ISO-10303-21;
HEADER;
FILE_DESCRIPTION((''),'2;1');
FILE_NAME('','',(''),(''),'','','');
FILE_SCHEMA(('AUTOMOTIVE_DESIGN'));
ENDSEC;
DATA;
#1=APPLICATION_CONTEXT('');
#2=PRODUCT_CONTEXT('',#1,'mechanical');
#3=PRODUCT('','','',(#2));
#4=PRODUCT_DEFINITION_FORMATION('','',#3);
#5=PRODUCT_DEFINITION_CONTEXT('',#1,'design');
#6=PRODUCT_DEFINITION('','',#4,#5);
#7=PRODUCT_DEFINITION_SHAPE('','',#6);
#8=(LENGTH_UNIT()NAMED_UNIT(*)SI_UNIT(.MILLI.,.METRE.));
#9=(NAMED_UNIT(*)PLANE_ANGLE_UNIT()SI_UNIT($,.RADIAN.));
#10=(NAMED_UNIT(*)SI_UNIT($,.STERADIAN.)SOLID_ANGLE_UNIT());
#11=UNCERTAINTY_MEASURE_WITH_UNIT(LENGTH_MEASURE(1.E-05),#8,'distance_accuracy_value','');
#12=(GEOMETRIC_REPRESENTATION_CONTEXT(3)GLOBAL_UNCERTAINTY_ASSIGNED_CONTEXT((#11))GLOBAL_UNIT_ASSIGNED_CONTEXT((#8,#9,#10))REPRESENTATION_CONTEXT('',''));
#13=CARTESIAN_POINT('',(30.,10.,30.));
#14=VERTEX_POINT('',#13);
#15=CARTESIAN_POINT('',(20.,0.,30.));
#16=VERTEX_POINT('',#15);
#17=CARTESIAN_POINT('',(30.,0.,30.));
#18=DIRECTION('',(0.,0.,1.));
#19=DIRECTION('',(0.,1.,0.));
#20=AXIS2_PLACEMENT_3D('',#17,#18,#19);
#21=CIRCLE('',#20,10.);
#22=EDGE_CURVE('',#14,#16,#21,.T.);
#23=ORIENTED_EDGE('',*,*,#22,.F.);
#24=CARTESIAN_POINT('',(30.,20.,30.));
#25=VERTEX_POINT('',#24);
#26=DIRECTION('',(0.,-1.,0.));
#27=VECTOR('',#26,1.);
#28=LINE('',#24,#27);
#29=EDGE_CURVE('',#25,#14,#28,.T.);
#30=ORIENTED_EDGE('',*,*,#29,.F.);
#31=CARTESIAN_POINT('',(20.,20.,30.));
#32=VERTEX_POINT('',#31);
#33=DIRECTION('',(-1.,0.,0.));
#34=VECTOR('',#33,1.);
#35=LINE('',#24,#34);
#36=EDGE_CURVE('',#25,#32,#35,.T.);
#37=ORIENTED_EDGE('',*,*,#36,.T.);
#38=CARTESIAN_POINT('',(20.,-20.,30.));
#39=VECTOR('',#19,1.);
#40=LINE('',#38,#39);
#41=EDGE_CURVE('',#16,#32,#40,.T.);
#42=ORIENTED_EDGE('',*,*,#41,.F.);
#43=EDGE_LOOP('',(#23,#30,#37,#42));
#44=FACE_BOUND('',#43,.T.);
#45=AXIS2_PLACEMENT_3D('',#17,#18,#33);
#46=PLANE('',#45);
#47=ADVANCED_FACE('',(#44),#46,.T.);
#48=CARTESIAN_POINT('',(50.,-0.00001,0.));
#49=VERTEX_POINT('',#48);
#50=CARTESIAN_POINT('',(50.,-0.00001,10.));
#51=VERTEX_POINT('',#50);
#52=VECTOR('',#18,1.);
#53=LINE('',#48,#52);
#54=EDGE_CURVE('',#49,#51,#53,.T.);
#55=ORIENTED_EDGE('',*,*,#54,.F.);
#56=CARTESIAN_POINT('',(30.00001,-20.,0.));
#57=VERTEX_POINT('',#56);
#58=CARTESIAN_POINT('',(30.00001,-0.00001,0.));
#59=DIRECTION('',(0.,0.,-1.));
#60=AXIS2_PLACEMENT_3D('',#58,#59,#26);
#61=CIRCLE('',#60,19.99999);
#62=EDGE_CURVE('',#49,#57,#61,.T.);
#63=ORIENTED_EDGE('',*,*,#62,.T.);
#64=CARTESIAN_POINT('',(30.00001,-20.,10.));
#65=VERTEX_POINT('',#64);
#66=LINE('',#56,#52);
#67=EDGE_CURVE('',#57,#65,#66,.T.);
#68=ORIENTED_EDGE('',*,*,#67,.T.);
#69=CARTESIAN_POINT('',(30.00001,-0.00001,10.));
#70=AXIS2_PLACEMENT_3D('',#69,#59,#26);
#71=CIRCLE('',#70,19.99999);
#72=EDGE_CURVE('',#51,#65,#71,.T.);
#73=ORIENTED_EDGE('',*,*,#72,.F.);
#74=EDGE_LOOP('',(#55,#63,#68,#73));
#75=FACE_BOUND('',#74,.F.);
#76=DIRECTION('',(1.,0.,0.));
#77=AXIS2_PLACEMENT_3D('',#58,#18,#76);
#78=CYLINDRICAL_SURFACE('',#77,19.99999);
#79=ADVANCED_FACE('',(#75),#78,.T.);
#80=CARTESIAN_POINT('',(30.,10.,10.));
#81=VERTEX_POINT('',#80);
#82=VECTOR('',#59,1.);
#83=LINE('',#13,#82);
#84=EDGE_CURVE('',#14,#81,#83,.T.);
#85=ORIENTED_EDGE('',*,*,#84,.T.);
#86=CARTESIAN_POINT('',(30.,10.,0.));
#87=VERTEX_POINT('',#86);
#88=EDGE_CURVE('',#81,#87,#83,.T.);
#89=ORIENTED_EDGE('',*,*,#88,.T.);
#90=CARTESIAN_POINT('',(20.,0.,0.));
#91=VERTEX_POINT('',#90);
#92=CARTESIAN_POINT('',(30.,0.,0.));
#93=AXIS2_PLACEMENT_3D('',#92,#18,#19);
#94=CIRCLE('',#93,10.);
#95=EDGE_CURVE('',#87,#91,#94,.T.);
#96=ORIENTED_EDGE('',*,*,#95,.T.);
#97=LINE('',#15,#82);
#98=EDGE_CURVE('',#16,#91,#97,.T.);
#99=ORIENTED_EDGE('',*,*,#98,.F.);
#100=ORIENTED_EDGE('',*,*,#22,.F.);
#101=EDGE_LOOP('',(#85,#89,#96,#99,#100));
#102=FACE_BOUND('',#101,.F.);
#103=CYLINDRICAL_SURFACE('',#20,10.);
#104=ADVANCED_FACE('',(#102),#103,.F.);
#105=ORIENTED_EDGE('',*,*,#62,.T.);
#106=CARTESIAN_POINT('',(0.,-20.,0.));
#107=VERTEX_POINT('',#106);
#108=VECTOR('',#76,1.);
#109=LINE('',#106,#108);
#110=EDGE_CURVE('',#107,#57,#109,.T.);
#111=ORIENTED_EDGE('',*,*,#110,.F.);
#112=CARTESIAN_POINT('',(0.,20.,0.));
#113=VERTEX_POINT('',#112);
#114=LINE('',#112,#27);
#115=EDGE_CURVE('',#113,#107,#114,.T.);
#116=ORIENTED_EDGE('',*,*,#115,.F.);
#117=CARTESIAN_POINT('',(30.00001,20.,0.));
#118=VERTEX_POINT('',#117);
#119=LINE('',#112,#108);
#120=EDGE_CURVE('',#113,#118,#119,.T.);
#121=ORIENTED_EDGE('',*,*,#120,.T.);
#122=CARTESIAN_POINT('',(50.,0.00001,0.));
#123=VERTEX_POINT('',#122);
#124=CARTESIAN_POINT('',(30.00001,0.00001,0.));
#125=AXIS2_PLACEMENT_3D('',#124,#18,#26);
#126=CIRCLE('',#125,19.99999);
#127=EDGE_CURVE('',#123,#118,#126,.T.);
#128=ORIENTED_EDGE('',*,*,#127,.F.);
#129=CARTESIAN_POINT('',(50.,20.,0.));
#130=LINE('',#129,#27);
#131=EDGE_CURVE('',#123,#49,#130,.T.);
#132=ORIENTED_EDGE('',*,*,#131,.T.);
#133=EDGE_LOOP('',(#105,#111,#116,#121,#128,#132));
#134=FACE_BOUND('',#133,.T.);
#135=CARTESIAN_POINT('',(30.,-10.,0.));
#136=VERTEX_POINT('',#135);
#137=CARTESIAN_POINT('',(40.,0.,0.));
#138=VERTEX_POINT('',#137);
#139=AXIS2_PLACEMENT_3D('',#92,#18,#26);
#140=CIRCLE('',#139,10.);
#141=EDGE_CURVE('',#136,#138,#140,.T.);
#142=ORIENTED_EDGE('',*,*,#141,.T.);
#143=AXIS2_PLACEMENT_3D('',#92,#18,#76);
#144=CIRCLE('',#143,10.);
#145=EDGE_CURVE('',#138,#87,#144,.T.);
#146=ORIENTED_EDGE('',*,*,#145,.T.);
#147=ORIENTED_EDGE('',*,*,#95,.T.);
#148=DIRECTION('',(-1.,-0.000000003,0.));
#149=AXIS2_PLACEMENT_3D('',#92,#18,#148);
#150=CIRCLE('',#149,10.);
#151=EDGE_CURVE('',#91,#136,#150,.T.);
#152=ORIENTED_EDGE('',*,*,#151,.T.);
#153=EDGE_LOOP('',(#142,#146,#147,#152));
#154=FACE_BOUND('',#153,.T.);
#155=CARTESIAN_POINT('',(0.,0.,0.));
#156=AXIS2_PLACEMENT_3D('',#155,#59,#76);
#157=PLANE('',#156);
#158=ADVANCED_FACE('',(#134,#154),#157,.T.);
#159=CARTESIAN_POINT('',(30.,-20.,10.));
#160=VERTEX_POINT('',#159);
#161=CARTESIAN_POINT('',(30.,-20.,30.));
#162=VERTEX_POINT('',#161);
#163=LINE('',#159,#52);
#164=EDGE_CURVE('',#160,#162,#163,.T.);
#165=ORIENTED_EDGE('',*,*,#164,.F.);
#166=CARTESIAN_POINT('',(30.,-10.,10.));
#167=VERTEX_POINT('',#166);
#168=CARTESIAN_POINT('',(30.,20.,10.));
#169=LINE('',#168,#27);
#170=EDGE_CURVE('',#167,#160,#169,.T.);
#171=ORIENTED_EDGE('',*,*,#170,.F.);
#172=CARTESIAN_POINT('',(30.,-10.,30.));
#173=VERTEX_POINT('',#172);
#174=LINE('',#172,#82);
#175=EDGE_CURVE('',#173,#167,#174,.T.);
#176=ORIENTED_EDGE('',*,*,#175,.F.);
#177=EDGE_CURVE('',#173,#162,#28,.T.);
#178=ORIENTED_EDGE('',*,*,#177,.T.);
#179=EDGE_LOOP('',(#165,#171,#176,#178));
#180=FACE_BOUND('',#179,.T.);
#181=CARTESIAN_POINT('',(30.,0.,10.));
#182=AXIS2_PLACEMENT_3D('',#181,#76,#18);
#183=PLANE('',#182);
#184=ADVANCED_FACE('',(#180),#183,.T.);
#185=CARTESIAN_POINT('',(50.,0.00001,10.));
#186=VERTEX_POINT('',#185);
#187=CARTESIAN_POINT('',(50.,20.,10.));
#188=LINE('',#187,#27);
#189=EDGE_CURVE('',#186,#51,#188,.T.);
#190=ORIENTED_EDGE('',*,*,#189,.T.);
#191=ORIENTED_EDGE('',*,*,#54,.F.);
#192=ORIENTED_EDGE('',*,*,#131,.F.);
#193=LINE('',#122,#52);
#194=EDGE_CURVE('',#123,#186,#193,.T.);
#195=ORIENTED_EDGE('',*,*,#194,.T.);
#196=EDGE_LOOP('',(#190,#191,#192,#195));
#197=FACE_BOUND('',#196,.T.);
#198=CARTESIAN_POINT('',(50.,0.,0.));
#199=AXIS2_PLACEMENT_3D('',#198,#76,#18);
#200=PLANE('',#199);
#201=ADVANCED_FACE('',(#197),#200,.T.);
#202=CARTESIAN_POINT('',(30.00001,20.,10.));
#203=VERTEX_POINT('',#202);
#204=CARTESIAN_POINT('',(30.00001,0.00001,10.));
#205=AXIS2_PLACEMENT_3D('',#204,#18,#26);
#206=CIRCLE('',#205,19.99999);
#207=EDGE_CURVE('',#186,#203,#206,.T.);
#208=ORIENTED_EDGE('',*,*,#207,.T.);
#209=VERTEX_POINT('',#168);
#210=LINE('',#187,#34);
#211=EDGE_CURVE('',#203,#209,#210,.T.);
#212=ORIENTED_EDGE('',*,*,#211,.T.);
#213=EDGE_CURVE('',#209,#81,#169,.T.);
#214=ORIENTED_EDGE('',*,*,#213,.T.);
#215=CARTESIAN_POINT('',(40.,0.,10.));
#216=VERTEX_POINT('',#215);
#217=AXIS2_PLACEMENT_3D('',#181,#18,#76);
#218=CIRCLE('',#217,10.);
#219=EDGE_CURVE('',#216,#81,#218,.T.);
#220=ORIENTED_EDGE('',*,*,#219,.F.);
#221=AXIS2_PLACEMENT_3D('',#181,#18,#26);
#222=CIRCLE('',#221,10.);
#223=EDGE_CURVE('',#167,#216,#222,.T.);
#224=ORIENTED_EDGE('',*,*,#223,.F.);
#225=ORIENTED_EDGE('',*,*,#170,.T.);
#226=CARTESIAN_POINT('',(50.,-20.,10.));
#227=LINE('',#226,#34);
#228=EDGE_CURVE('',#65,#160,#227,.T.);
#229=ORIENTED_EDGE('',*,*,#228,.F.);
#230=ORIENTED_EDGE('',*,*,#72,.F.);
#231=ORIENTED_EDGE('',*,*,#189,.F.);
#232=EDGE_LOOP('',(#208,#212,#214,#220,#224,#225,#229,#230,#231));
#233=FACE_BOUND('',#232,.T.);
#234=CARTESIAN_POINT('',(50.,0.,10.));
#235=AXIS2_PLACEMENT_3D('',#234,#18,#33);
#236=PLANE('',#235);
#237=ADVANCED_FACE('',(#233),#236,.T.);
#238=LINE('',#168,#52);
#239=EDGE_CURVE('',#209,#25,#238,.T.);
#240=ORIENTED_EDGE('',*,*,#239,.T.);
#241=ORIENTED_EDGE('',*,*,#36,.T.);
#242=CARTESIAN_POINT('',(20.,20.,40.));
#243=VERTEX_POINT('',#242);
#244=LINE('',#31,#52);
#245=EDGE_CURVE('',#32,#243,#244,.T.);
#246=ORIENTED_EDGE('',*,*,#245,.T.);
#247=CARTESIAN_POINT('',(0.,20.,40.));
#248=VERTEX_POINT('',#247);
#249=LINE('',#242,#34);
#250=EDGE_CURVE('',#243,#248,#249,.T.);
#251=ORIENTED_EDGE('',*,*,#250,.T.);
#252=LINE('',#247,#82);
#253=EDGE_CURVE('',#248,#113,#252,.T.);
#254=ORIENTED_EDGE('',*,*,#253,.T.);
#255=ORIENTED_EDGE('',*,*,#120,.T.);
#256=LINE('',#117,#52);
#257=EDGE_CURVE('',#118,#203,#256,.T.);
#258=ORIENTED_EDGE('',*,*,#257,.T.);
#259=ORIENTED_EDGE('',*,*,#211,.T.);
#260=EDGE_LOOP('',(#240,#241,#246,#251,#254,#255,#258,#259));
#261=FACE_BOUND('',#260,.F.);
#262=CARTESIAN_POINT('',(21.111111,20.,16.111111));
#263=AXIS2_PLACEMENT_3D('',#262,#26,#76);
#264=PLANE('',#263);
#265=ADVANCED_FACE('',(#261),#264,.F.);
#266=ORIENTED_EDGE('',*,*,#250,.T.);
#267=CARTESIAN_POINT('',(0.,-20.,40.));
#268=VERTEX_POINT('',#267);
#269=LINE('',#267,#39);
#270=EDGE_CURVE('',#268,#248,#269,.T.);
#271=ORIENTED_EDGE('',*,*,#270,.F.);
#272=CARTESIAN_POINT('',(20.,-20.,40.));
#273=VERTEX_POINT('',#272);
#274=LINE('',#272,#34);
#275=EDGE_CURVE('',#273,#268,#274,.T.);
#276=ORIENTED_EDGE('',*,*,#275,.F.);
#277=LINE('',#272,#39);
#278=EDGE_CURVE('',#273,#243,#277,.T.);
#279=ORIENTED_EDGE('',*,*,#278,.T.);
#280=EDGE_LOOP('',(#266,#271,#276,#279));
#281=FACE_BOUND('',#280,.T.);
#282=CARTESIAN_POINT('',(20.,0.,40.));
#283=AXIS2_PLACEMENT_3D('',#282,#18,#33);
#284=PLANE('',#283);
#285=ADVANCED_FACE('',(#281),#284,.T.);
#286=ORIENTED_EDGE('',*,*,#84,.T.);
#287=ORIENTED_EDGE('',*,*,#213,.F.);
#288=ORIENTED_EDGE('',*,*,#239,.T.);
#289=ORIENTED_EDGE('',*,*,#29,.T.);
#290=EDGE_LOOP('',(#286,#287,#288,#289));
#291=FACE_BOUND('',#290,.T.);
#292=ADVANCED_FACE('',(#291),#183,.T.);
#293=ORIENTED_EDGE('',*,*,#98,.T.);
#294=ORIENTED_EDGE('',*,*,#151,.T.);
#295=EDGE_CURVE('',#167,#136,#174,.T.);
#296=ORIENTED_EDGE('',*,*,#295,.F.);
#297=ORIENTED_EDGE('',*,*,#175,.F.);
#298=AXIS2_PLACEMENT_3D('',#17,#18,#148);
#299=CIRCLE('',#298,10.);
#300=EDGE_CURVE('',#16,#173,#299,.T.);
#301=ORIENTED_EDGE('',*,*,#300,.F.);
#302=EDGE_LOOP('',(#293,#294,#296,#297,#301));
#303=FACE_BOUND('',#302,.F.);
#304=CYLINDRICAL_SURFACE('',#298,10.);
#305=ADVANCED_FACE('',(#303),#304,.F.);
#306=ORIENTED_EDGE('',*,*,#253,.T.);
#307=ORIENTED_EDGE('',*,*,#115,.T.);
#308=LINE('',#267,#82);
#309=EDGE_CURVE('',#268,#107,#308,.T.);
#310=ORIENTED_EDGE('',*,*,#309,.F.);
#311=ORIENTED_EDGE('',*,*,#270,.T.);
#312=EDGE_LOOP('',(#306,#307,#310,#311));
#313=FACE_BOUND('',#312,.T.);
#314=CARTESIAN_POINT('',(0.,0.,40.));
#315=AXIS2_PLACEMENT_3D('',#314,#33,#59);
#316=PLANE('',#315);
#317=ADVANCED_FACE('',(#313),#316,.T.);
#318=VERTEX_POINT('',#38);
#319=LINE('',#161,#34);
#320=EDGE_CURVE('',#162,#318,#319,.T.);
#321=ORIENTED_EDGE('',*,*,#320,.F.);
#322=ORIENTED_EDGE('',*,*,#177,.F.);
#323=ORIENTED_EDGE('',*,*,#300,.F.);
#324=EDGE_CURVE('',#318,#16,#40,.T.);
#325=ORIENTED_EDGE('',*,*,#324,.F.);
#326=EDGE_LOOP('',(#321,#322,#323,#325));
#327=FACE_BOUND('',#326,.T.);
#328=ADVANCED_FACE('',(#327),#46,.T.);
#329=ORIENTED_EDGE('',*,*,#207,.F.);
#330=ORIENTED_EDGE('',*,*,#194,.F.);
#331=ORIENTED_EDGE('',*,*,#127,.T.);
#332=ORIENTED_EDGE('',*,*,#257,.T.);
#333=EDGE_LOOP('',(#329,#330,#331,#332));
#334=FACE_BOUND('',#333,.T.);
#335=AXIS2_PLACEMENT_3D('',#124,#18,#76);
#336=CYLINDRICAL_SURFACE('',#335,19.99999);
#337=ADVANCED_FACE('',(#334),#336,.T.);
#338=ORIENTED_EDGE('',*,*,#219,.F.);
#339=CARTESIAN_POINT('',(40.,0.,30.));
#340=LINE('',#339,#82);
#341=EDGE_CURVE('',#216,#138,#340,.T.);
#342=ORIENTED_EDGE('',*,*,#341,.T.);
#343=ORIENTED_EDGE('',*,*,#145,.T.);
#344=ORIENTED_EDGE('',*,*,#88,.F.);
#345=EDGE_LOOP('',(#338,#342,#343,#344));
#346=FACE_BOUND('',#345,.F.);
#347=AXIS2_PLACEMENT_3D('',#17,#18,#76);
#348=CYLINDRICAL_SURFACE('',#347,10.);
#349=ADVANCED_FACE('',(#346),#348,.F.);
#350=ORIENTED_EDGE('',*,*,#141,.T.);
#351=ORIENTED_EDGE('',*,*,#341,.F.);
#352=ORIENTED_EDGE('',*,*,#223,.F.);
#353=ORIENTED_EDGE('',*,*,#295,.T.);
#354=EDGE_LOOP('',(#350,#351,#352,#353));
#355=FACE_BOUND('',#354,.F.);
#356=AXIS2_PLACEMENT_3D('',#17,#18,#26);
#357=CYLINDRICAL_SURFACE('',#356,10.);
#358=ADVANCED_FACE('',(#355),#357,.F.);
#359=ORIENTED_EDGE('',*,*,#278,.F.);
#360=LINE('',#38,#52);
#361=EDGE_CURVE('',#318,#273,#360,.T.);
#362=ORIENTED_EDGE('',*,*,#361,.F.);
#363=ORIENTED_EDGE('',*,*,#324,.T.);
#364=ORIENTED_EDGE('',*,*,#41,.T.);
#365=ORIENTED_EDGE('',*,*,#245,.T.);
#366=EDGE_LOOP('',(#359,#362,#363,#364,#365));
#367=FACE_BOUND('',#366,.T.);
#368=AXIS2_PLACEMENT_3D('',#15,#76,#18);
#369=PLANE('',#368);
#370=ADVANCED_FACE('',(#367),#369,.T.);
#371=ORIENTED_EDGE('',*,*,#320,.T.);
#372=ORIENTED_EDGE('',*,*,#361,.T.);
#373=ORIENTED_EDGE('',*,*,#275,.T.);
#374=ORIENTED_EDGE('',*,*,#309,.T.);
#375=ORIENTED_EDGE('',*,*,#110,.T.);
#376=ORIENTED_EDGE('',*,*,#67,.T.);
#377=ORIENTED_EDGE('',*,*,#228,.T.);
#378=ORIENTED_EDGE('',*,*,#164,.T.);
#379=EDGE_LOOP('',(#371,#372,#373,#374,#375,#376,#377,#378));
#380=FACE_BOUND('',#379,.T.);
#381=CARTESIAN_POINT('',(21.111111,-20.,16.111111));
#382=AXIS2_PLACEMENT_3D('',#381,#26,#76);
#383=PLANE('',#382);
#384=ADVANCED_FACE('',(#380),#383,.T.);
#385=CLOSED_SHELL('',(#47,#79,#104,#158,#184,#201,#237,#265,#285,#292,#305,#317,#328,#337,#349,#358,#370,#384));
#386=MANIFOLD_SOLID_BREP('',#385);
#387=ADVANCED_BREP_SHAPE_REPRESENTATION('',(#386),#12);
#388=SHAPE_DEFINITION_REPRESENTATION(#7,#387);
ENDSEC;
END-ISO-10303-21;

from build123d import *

# Parameters (mm, degrees)
F1_DEPTH = 20
F2_R     = 19.99999
F4_DEPTH = 30.001


# Not quite as in the source:
# - a fillet or chamfer is up to 0.001 mm smaller than in the source, because OpenCascade refuses the exact size


with BuildPart() as f1:
    # F0 (on Front) → F1 (new body, symmetric)
    with BuildSketch(Plane.XZ):
        Polygon((0, 40), (0, 0), (50, 0), (50, 10), (30, 10), (30, 30), (20, 30), (20, 40), align=None)
    extrude(amount=F1_DEPTH, both=True)

    # F2 (radius 20 in the source; OpenCascade refuses exactly that, so slightly less here)
    f2_edges = [f1.edges().sort_by_distance(p)[0] for p in [
        (50, -20, 5),
        (50, 20, 5),
    ]]
    fillet(f2_edges, radius=F2_R)

    # F3 (on face) → F4 (cut, through all)
    with BuildSketch(Plane.XY.offset(30)):
        with BuildLine():
            Line((30, -10), (30, 10))
            ThreePointArc((30, 10), (22.9289321778, 7.0710678016), (20, -2.91e-08))
            ThreePointArc((20, -2.91e-08), (22.9289321984, -7.0710678222), (30, -10))
        make_face()
        with BuildLine():
            ThreePointArc((30, -10), (37.0710678119, -7.0710678119), (40, 0))
            ThreePointArc((40, 0), (37.0710678119, 7.0710678119), (30, 10))
            Line((30, 10), (30, -10))
        make_face()
    extrude(amount=-F4_DEPTH, mode=Mode.SUBTRACT)


solid = f1.part
